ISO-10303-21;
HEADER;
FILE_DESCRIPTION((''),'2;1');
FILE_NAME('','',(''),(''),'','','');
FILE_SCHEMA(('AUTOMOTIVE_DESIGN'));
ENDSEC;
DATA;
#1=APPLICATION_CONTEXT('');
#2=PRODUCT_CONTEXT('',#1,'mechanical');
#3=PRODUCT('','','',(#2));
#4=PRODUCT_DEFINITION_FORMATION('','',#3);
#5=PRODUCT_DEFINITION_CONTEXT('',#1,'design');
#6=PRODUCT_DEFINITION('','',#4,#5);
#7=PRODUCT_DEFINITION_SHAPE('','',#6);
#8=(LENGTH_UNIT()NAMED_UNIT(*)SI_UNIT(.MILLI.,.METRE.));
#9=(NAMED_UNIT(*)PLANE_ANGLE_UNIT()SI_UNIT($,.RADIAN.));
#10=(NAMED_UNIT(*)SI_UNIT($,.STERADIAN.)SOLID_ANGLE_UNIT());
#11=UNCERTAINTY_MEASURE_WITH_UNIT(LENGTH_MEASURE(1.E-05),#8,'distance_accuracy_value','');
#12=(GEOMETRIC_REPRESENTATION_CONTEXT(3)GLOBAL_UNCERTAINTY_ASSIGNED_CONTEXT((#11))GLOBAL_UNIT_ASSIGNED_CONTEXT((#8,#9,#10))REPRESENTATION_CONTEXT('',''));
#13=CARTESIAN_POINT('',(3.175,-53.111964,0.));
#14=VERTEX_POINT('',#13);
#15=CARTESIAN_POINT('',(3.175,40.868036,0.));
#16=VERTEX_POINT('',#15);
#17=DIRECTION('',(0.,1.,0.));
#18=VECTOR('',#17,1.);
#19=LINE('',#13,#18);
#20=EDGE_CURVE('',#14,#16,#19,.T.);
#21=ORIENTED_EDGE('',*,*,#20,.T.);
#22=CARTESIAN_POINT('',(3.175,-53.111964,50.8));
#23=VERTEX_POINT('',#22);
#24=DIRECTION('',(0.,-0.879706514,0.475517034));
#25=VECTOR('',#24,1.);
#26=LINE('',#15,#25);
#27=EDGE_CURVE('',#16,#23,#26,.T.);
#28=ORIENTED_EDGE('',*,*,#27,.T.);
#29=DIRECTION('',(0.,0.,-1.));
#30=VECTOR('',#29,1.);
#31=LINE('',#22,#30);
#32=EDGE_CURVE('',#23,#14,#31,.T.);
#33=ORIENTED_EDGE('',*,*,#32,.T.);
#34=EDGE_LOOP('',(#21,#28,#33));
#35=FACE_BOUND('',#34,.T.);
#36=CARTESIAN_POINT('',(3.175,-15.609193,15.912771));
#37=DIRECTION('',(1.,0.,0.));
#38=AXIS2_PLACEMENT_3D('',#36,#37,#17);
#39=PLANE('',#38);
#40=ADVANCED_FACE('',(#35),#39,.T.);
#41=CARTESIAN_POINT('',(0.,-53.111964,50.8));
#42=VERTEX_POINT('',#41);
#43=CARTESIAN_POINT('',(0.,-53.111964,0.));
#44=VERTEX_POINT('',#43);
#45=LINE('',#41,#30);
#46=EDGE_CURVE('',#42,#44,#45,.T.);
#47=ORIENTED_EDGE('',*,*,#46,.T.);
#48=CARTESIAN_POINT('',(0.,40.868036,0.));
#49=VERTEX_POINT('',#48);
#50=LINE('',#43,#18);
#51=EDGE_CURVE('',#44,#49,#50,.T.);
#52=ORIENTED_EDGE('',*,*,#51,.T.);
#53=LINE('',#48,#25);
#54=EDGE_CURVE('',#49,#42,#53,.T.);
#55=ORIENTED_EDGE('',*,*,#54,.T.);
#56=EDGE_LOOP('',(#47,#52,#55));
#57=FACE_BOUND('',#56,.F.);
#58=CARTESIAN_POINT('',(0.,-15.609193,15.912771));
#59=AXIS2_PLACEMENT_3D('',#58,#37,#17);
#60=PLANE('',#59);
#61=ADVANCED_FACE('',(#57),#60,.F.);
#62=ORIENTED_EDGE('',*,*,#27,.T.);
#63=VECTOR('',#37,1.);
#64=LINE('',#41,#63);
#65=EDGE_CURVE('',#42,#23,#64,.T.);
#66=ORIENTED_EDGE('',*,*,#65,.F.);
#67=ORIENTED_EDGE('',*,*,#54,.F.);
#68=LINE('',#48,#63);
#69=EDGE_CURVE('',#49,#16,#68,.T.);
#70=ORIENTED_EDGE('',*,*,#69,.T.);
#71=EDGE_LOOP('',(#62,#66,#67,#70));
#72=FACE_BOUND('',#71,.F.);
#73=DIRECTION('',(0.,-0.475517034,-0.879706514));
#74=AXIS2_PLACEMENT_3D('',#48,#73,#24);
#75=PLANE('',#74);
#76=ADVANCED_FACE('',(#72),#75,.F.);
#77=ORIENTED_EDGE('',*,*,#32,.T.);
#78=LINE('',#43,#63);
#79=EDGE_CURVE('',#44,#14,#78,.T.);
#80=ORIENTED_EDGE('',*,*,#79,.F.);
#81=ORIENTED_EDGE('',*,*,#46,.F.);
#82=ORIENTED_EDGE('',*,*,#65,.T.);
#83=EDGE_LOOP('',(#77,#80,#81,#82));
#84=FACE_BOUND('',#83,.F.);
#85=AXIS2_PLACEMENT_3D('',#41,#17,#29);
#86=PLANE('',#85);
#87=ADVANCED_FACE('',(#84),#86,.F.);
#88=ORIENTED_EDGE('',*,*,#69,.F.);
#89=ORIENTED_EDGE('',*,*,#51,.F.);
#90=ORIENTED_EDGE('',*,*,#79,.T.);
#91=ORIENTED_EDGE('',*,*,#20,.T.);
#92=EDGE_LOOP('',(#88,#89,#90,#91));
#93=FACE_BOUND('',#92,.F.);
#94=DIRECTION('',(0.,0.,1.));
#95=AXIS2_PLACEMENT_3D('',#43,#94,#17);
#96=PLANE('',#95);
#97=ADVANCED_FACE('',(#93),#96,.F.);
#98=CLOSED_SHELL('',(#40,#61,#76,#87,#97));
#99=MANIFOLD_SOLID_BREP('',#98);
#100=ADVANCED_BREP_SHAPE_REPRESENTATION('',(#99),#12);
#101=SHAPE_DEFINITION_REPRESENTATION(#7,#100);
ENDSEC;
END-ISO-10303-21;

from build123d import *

# Parameters (mm, degrees)
F1_DEPTH = 3.175


# Not quite as in the source:
# - a length typed as a fraction of an inch, garbled in the dataset ("3 / 203.2 mm" for 3/8 in), is restored


with BuildPart() as f1:
    # F0 (on Right) → F1 (new body)
    with BuildSketch(Plane.YZ):
        Polygon((-53.1119635351, 50.8), (-53.1119635351, 0), (40.8680364649, 0), align=None)
    extrude(amount=F1_DEPTH)


solid = f1.part
